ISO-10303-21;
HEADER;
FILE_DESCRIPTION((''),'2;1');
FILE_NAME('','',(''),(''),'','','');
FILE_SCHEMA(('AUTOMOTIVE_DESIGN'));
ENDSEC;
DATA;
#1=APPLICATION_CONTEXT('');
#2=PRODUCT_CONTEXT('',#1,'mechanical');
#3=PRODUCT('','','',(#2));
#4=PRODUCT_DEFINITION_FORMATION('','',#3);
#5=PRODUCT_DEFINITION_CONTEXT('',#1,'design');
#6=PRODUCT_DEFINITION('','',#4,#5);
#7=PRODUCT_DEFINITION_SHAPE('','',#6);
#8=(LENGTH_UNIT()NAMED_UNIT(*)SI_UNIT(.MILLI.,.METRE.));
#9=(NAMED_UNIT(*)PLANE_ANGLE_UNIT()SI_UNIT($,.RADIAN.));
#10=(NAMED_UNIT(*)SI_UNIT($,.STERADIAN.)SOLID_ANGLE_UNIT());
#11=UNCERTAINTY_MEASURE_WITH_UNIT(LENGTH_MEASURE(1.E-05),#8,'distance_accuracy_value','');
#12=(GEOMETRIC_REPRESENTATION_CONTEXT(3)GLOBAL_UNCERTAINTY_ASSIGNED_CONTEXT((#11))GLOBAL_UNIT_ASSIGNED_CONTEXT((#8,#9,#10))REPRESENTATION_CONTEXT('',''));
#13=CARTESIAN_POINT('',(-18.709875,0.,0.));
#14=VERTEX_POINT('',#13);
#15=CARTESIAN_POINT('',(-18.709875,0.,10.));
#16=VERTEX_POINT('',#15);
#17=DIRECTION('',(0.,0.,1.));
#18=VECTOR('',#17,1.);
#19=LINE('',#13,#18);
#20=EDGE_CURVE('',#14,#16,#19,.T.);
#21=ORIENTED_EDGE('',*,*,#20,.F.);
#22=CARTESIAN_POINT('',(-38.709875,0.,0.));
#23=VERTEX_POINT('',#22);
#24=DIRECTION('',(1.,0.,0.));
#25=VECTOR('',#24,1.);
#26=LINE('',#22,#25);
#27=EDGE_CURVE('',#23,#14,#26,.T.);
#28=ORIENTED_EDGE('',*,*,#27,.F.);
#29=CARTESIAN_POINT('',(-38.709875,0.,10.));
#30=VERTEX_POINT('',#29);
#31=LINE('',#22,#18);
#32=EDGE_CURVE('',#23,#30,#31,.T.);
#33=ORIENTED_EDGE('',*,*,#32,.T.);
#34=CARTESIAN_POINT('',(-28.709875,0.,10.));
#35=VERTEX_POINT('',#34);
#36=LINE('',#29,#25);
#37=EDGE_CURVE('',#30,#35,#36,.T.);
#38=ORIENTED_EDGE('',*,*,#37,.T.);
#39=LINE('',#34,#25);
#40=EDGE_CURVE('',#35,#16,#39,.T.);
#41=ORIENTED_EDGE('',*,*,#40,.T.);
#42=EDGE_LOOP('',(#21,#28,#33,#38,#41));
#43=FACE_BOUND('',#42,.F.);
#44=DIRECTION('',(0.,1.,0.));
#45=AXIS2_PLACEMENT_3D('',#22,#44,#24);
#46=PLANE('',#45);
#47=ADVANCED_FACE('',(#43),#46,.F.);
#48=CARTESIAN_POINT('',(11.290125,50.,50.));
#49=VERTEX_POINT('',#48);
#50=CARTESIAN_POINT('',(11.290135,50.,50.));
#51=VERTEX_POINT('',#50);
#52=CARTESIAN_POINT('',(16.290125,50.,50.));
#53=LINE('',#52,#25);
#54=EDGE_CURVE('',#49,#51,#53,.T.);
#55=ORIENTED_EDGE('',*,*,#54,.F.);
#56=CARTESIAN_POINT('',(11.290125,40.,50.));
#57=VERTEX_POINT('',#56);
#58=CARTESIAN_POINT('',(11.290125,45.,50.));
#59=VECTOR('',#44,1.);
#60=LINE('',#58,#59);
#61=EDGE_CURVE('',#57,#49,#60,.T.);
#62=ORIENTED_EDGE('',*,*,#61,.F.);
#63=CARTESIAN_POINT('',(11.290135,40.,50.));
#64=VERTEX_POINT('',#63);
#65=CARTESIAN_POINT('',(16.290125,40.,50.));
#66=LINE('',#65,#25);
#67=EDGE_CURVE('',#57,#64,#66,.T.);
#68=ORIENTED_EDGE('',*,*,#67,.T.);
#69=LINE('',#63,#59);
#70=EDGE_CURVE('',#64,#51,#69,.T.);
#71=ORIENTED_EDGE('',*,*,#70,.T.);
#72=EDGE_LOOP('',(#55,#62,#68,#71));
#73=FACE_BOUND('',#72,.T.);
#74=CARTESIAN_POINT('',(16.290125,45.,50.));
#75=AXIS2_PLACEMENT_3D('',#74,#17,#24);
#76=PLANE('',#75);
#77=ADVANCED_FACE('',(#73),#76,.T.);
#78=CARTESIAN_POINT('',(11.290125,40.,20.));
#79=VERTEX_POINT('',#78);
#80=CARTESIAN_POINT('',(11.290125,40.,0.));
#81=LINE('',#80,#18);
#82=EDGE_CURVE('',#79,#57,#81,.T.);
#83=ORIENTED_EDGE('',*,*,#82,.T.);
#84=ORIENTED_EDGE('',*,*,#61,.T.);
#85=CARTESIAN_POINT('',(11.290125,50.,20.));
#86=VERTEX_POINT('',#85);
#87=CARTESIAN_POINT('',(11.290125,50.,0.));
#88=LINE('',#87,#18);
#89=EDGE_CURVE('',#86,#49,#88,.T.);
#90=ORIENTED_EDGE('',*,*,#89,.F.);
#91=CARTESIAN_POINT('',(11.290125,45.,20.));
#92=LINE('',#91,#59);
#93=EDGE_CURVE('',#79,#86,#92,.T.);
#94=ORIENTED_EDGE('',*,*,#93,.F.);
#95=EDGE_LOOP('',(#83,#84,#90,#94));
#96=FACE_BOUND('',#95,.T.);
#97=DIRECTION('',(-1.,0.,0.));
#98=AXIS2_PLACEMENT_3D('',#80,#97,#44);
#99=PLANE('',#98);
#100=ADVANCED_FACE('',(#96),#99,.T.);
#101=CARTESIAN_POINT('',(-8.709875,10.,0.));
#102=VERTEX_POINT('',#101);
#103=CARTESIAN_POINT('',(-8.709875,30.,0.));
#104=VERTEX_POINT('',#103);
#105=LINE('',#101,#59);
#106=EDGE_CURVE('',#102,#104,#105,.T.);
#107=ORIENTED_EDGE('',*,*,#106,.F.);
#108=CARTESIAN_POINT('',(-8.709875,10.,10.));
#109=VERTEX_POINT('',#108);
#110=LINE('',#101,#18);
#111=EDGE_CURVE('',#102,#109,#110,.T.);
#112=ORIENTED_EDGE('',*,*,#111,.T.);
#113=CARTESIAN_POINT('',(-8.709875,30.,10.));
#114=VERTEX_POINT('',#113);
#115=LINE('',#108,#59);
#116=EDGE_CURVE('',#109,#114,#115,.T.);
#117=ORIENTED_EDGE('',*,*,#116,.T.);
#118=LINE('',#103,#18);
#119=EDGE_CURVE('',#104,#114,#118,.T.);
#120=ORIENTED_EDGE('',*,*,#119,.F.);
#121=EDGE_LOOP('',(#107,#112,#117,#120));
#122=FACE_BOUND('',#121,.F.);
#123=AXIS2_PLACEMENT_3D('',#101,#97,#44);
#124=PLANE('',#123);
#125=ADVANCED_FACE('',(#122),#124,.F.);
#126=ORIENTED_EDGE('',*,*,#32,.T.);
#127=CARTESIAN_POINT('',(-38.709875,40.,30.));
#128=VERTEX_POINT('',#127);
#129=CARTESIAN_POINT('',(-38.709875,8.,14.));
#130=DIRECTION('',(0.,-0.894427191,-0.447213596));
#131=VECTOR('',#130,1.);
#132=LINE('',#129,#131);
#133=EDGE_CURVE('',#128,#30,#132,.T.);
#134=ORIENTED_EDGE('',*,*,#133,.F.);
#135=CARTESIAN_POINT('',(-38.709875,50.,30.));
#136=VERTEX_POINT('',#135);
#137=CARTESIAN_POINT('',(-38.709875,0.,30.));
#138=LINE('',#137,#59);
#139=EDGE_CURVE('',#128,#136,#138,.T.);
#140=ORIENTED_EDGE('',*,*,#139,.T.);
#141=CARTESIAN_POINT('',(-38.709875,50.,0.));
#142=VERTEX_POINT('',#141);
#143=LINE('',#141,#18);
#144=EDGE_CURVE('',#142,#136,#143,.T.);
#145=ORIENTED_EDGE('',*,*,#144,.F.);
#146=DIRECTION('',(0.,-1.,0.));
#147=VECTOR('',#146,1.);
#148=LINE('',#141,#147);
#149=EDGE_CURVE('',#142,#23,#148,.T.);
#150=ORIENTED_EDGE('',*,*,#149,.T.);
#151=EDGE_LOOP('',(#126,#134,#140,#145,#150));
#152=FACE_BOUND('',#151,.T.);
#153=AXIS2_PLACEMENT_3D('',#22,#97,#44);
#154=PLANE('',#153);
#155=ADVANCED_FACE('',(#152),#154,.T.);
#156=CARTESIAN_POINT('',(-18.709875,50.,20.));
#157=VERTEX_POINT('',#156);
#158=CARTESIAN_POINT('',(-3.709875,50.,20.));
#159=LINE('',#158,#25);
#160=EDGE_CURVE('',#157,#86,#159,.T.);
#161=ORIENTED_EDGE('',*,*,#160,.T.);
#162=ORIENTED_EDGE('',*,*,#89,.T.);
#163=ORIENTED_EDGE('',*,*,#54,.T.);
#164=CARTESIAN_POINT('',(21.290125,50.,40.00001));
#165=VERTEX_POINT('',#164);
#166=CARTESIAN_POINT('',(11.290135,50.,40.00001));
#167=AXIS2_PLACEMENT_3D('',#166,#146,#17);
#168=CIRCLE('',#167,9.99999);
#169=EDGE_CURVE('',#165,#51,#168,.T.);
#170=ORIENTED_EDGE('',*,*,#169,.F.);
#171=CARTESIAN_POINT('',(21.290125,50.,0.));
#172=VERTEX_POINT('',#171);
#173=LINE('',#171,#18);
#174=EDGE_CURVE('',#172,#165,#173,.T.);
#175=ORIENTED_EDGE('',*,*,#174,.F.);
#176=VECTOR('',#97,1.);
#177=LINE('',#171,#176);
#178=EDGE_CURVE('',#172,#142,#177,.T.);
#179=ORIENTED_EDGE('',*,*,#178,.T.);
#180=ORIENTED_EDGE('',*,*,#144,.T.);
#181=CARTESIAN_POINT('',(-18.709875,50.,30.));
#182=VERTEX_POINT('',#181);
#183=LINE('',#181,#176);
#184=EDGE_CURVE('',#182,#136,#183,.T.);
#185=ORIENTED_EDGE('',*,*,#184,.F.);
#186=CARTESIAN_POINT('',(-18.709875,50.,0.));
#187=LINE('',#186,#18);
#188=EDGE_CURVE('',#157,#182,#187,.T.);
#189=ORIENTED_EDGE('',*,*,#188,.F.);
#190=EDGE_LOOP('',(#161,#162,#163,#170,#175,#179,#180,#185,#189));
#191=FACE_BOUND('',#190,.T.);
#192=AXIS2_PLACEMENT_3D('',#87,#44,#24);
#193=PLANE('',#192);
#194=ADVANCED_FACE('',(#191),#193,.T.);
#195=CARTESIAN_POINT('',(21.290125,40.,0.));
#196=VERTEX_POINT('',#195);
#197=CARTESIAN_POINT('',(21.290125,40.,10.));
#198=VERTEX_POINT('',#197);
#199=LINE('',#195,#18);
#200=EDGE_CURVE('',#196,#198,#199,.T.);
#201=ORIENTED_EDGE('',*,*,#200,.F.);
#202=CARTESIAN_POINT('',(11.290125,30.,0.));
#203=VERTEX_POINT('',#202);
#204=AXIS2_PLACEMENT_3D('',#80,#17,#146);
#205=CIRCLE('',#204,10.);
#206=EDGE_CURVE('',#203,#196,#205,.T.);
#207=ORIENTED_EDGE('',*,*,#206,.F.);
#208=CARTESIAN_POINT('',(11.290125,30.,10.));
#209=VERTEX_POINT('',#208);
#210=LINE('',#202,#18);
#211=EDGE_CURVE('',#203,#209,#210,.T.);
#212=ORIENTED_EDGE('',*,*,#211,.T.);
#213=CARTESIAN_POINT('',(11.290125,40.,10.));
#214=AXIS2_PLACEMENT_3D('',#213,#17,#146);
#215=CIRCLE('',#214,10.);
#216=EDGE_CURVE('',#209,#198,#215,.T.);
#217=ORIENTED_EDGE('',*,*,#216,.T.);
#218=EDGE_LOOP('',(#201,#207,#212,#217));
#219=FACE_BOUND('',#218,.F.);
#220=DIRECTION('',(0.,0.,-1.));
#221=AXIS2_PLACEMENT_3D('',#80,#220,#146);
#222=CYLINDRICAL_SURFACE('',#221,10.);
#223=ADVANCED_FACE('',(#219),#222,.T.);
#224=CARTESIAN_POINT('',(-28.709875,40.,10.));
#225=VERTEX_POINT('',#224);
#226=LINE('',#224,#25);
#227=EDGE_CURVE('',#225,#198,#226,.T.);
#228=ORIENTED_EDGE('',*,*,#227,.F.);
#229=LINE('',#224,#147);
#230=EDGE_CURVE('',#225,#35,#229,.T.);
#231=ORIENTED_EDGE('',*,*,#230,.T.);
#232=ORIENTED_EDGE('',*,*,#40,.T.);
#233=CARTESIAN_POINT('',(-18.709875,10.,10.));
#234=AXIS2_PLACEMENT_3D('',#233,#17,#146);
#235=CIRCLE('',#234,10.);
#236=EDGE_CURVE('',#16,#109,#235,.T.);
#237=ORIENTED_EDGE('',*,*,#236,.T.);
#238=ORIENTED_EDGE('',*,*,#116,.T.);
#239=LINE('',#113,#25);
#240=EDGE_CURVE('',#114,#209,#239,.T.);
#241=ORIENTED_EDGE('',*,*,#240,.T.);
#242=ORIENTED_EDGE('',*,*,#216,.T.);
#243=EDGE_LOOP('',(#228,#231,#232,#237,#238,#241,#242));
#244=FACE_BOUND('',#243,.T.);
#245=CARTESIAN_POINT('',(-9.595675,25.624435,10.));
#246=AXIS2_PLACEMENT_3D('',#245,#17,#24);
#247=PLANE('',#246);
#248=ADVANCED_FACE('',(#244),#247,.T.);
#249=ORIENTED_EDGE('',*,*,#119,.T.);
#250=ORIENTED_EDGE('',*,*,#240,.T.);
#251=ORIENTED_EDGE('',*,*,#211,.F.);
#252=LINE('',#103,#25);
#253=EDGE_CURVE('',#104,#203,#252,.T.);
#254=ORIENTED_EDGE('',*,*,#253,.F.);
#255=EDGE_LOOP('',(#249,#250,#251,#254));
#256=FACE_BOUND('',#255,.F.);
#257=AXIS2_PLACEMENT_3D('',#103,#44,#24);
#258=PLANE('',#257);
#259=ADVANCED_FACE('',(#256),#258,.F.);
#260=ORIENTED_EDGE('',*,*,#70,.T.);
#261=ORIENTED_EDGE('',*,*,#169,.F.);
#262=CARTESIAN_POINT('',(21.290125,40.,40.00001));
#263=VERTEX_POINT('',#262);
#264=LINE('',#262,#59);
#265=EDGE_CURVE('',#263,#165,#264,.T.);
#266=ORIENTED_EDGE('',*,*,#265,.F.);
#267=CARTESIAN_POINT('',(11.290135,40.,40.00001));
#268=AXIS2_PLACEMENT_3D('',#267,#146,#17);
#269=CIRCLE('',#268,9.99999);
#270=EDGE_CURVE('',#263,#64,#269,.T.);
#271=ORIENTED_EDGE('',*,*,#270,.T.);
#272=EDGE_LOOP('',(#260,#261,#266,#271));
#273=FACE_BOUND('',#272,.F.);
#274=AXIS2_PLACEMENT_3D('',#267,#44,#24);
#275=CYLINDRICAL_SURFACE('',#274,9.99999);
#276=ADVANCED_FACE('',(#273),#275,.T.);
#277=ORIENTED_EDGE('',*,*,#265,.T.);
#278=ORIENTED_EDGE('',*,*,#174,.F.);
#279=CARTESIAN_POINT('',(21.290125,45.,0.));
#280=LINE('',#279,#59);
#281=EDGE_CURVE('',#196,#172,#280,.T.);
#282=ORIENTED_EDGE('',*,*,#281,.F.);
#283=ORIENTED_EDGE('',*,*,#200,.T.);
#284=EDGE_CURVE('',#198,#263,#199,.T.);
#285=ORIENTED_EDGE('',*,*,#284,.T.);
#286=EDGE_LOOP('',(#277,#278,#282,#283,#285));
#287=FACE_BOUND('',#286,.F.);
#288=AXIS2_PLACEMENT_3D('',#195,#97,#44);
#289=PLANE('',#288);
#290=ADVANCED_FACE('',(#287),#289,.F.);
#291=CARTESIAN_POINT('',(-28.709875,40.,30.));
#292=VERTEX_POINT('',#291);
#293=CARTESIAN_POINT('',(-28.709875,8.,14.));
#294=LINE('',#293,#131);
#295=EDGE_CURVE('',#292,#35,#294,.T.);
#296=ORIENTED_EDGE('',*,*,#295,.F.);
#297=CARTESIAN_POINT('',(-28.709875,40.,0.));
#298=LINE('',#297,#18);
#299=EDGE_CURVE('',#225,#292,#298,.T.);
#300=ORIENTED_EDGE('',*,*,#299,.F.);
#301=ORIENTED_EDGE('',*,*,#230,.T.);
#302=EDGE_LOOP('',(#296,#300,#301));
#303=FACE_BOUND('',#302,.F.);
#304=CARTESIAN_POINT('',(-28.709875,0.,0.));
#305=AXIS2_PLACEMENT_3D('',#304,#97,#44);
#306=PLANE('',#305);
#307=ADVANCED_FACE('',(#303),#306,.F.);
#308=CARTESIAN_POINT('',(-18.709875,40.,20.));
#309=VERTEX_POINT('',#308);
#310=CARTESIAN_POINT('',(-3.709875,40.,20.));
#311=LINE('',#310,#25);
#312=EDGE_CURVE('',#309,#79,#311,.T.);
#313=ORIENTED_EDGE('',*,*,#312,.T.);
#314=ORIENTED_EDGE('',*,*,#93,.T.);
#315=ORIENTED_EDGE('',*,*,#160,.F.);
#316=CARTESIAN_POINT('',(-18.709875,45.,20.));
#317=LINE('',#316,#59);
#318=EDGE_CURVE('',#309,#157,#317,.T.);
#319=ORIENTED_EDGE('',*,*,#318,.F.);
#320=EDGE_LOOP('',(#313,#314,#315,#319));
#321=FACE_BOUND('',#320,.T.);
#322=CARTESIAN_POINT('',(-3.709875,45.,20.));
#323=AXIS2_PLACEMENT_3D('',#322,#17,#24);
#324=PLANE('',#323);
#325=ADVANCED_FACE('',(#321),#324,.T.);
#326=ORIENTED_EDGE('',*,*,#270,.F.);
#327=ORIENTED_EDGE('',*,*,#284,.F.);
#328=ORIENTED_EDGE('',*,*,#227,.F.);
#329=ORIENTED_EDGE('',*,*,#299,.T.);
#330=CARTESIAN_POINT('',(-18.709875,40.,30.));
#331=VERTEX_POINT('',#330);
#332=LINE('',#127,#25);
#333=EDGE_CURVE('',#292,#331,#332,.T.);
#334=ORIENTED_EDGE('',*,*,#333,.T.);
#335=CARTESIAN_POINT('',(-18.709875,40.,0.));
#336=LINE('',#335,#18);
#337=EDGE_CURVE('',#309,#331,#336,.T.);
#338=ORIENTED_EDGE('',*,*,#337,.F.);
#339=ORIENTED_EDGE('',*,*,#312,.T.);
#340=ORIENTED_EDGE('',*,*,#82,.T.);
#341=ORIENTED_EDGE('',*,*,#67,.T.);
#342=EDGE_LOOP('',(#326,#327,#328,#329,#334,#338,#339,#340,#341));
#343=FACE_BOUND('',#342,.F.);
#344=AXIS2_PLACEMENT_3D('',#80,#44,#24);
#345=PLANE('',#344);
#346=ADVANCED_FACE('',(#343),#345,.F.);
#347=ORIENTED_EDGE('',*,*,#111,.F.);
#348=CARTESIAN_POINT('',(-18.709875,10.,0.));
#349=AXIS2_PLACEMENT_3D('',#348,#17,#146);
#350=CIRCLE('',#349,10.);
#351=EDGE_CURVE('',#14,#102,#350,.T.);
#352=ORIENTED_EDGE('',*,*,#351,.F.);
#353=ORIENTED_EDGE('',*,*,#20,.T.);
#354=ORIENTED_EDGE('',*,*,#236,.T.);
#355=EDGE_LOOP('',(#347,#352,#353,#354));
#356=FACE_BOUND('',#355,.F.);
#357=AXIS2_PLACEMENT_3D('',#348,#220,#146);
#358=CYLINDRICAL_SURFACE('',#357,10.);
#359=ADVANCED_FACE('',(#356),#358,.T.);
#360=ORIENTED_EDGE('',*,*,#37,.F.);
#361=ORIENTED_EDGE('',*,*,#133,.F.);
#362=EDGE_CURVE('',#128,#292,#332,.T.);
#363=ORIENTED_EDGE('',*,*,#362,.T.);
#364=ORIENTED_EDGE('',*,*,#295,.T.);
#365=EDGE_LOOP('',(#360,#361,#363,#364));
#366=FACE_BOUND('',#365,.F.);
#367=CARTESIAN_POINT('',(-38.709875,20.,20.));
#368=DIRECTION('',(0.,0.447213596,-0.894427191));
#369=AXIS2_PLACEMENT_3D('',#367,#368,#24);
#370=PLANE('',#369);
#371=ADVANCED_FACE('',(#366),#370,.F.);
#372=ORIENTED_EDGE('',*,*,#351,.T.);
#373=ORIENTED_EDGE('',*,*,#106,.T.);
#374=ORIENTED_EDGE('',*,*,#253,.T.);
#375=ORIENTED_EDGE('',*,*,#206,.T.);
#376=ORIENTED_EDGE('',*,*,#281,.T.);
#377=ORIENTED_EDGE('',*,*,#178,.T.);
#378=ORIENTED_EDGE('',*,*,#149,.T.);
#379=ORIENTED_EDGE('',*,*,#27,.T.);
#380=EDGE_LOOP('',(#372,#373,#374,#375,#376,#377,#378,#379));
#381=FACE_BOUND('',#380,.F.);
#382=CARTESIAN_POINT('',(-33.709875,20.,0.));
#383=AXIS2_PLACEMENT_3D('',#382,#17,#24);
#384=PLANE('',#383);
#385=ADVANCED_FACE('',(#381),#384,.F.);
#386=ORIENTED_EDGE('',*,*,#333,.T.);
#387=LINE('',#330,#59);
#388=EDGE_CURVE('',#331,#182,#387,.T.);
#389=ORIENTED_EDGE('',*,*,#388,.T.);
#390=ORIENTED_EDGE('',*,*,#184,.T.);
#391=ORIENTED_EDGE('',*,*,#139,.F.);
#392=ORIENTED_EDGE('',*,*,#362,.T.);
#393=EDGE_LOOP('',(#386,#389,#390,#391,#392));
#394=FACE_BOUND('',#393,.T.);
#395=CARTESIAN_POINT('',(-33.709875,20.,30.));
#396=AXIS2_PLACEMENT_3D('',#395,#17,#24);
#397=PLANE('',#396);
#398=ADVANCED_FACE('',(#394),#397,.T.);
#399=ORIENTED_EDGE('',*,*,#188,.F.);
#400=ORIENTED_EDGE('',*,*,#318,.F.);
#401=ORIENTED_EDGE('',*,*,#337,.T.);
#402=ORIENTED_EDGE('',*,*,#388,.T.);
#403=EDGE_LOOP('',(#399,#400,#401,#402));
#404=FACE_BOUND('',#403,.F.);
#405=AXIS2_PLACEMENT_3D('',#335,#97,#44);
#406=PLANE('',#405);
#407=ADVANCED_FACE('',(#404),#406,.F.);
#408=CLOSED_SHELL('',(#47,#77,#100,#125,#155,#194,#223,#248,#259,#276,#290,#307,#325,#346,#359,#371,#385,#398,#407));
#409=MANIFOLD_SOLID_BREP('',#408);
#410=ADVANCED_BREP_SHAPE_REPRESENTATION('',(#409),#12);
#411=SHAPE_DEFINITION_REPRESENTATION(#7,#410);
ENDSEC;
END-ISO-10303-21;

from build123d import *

# Parameters (mm, degrees)
F1_DEPTH = 10
F0_W     = 30
F0_H     = 10
F2_DEPTH = 20
F3_DEPTH = 30
F0_W_2   = 10
F4_DEPTH = 50
F0_H_2   = 40
F5_DEPTH = 30
F6_R     = 9.99999
F7_SIZE2 = 20
F7_SIZE  = 40


# Not quite as in the source:
# - a fillet or chamfer is up to 0.001 mm smaller than in the source, because OpenCascade refuses the exact size


with BuildPart() as f1:
    # F0 (on Top) → F1 (new body)
    with BuildSketch(Plane.XY):
        with BuildLine():
            ThreePointArc((11.2901248038, 30), (18.3611926156, 32.9289321881), (21.2901248038, 40))
            Line((21.2901248038, 40), (11.2901248038, 40))
            Line((11.2901248038, 40), (-18.7098751962, 40))
            Line((-18.7098751962, 40), (-28.7098751962, 40))
            Line((-28.7098751962, 40), (-28.7098751962, 0))
            Line((-28.7098751962, 0), (-18.7098751962, 0))
            ThreePointArc((-18.7098751962, 0), (-11.6388073844, 2.9289321881), (-8.7098751962, 10))
            Line((-8.7098751962, 10), (-8.7098751962, 30))
            Line((-8.7098751962, 30), (11.2901248038, 30))
        make_face()
    extrude(amount=F1_DEPTH)

    # F0 (on Top) → F2 (join)
    with BuildSketch(Plane.XY):
        with Locations((-3.7098751962, 45)):
            Rectangle(F0_W, F0_H)
    extrude(amount=F2_DEPTH)

    # F0 (on Top) → F3 (join)
    with BuildSketch(Plane.XY):
        Polygon((-28.7098751962, 40), (-18.7098751962, 40), (-18.7098751962, 50), (-38.7098751962, 50), (-38.7098751962, 40), align=None)
    extrude(amount=F3_DEPTH)

    # F0 (on Top) → F4 (join)
    with BuildSketch(Plane.XY):
        with Locations((16.2901248038, 45)):
            Rectangle(F0_W_2, F0_H)
    extrude(amount=F4_DEPTH)

    # F0 (on Top) → F5 (join)
    with BuildSketch(Plane.XY):
        with Locations((-33.7098751962, 20)):
            Rectangle(F0_W_2, F0_H_2)
    extrude(amount=F5_DEPTH)

    # F6 (radius 10 in the source; OpenCascade refuses exactly that, so slightly less here)
    f6_edges = [f1.edges().sort_by_distance(p)[0] for p in [
        (21.290125, 45, 50),
    ]]
    fillet(f6_edges, radius=F6_R)

    # F7
    f7_edges = [f1.edges().sort_by_distance(p)[0] for p in [
        (-33.709875, 0, 30),
    ]]
    f7_side = f1.faces().sort_by_distance((-32.043209, 28.333333, 30))[0]
    chamfer(f7_edges, length=F7_SIZE, length2=F7_SIZE2, reference=f7_side)


solid = f1.part
